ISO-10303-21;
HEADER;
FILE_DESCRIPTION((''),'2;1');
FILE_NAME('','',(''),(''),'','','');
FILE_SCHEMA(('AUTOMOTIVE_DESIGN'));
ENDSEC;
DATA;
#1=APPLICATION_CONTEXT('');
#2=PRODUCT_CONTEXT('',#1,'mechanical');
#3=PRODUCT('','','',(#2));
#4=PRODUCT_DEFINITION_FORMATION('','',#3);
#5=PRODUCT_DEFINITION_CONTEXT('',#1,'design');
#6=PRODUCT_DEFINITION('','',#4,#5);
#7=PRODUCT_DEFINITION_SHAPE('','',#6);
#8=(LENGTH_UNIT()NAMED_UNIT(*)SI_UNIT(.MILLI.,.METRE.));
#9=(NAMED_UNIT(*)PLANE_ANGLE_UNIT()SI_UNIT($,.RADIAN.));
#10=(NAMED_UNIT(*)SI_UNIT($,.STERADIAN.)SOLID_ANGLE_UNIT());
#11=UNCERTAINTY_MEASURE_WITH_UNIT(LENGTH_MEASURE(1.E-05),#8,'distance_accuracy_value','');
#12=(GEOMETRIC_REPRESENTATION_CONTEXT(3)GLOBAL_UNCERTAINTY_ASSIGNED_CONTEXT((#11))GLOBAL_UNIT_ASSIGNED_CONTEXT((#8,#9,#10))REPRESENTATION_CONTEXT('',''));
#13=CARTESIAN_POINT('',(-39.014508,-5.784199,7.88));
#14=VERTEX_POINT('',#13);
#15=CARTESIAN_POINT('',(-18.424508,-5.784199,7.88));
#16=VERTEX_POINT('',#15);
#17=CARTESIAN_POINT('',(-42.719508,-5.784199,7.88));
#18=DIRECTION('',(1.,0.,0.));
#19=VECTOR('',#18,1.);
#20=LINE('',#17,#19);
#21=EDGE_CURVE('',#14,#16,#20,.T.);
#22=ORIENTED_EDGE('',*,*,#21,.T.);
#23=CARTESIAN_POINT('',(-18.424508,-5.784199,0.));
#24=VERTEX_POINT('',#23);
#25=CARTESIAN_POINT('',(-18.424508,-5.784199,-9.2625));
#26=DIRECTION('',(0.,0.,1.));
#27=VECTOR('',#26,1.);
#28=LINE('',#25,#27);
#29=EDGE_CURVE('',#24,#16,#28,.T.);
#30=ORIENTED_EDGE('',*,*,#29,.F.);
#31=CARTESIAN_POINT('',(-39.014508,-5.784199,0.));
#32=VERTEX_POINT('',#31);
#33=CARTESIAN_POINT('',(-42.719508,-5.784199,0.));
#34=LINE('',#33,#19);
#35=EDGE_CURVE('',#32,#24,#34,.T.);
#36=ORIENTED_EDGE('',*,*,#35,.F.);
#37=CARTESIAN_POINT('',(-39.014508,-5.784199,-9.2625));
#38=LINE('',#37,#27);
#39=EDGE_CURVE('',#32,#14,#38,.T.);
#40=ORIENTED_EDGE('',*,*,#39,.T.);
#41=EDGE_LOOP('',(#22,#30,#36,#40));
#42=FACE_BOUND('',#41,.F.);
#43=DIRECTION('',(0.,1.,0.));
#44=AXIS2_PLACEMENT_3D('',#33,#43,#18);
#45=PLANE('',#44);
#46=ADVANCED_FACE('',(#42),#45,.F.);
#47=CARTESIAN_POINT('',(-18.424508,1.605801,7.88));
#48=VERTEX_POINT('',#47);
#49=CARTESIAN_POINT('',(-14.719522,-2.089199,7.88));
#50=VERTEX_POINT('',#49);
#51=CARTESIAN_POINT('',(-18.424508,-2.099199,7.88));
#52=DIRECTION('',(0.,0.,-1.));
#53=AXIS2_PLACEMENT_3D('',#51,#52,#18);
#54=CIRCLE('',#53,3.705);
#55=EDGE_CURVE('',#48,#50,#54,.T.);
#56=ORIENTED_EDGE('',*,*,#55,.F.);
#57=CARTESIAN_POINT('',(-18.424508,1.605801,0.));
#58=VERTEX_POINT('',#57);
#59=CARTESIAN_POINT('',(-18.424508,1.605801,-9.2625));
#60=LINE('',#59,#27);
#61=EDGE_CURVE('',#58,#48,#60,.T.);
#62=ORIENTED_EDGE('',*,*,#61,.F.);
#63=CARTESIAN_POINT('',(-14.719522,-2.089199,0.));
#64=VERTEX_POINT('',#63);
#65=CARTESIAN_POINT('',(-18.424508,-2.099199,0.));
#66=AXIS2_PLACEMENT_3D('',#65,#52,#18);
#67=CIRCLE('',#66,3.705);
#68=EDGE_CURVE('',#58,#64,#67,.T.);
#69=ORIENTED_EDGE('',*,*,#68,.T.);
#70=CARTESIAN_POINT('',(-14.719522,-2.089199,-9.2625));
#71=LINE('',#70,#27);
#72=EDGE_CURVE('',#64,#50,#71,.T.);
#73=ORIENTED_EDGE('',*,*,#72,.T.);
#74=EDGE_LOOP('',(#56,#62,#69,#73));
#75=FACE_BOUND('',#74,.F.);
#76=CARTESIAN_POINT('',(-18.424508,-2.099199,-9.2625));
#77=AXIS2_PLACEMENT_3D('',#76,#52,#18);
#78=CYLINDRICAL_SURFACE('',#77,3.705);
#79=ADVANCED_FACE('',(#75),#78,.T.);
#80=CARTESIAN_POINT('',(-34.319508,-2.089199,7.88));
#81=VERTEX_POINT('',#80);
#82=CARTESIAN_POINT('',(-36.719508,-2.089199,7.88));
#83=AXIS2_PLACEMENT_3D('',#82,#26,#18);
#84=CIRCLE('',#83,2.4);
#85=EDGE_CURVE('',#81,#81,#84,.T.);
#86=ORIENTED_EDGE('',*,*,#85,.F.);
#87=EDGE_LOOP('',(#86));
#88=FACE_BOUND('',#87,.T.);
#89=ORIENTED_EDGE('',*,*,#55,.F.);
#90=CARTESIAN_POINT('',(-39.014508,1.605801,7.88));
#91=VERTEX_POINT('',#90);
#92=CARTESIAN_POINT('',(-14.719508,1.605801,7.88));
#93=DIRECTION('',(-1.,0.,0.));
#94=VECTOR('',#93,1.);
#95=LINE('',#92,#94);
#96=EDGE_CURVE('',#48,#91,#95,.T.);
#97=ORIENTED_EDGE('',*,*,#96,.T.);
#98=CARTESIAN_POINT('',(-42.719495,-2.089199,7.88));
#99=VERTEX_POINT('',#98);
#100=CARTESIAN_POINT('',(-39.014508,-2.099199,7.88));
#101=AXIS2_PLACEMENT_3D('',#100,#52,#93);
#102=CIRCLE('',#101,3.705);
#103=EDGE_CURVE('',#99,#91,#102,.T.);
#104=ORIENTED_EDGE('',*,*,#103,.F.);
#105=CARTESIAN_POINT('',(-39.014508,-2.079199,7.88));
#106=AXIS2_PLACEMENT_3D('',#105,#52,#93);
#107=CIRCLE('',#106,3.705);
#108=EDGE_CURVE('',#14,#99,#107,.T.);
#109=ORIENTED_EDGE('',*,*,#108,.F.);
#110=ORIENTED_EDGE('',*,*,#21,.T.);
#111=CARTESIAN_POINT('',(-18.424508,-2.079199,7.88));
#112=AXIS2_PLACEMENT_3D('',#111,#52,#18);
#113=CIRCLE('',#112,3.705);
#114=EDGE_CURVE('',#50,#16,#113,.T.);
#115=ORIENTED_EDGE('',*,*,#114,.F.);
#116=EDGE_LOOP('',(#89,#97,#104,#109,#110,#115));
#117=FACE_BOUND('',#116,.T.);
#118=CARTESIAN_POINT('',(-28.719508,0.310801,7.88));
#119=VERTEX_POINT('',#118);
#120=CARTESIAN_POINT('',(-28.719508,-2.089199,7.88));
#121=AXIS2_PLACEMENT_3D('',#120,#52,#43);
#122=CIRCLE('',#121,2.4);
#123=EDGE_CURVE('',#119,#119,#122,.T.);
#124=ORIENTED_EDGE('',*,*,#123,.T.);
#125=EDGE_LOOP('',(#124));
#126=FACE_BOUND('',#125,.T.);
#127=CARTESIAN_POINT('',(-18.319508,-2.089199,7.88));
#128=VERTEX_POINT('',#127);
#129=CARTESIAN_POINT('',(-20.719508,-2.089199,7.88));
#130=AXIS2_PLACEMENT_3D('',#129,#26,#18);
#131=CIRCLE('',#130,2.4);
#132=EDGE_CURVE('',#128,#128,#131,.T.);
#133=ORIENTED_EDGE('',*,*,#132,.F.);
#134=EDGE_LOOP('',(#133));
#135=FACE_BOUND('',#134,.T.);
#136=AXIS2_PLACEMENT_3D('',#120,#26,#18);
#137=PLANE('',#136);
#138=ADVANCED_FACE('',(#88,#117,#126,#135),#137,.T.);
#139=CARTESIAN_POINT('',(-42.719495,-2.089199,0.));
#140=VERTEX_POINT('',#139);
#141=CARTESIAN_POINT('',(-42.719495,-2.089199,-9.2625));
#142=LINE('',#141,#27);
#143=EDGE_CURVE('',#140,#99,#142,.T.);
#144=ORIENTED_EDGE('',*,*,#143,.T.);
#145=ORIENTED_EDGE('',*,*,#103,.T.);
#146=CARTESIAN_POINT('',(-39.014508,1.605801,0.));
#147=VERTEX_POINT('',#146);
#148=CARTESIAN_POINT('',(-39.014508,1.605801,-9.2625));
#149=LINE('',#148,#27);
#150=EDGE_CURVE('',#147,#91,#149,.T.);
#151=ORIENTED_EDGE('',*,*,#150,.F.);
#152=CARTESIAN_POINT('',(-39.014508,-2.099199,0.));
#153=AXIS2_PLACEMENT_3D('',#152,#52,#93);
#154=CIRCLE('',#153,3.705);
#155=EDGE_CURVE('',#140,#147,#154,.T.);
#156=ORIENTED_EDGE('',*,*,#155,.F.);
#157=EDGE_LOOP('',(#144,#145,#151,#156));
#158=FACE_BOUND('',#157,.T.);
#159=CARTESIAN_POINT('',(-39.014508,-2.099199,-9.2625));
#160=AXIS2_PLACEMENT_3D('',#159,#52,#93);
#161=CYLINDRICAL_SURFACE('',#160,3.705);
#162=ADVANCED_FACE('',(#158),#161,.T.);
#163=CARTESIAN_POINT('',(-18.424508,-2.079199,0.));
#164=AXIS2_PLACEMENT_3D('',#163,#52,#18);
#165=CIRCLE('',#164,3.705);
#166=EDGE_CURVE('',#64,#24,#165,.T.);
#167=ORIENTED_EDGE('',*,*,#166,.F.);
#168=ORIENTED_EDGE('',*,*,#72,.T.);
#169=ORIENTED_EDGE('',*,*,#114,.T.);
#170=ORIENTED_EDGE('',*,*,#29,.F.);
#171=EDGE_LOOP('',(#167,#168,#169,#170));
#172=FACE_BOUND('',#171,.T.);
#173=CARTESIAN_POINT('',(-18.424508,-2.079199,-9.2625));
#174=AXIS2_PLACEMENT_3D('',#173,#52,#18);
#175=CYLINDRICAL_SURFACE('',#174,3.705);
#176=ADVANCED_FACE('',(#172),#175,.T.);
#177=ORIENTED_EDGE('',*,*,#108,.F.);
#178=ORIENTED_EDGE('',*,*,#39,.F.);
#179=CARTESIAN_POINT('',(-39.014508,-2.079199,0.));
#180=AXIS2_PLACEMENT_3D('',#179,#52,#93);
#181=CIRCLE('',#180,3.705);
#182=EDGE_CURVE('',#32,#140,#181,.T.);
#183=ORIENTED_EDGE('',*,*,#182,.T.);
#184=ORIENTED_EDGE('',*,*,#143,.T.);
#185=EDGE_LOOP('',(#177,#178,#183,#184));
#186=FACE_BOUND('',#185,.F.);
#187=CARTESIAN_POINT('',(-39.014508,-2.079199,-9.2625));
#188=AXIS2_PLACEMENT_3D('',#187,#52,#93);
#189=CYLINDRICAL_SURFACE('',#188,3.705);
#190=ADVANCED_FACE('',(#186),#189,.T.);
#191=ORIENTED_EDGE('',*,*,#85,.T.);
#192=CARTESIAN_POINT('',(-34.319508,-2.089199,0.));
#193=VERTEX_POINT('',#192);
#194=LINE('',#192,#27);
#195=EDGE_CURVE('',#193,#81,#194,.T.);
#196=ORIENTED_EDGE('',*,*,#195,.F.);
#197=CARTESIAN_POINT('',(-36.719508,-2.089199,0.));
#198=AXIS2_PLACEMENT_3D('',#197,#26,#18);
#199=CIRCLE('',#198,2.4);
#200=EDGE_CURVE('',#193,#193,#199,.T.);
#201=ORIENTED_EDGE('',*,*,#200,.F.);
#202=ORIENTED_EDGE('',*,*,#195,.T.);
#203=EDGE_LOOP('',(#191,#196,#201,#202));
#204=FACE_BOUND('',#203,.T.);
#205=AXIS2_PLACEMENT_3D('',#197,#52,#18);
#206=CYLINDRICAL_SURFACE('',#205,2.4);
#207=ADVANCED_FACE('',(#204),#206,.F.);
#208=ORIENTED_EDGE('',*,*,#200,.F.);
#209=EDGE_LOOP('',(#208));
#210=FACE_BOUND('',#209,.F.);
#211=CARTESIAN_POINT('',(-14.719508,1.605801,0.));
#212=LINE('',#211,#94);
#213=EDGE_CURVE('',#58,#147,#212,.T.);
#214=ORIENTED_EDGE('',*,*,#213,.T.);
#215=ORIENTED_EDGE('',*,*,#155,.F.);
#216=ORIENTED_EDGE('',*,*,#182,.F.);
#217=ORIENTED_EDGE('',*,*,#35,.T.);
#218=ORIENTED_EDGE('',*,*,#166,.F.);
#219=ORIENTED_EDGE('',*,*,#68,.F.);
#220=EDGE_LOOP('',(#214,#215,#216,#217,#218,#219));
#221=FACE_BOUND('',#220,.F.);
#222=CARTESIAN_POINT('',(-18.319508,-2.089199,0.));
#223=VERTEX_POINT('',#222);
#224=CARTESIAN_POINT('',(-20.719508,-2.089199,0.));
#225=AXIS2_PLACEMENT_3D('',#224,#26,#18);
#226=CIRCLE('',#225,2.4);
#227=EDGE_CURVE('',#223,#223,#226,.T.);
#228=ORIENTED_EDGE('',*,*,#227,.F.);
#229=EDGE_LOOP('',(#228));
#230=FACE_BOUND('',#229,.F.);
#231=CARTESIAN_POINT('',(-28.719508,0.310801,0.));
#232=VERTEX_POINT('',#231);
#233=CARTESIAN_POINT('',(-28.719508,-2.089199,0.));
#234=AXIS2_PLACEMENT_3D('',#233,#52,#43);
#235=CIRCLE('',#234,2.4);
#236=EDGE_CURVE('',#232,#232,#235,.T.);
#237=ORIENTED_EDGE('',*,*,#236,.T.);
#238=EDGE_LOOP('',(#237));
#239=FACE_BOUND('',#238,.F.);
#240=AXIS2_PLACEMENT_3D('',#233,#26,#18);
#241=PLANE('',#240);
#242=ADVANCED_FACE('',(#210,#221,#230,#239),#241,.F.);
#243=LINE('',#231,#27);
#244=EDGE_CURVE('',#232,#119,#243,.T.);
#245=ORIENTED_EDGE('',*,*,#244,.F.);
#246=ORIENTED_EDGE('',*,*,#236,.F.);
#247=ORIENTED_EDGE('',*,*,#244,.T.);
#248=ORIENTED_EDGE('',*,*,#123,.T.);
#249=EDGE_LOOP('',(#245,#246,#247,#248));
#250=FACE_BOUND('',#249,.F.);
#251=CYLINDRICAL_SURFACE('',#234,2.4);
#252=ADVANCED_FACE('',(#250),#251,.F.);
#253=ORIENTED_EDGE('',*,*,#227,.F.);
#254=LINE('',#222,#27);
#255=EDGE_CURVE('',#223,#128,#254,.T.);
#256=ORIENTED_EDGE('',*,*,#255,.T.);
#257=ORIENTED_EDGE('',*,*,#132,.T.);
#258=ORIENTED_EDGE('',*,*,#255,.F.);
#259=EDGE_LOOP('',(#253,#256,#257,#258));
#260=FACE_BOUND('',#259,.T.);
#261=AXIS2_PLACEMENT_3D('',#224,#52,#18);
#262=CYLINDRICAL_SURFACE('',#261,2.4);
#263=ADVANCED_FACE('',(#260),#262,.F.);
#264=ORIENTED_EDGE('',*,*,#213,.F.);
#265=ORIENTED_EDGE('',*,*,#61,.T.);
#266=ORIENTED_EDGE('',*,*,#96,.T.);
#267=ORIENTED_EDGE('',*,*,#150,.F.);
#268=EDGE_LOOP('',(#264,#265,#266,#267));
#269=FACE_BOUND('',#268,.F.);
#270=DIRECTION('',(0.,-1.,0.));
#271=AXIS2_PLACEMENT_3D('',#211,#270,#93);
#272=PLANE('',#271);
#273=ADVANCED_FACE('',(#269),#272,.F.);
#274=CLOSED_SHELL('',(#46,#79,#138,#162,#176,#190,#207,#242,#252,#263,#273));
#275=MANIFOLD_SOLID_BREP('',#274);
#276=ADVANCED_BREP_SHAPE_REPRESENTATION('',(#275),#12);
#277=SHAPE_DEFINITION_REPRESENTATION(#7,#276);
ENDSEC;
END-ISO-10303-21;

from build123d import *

# Parameters (mm, degrees)
F0_R        = 2.4
F1_DEPTH    = 7.88
F2_T1_DEPTH = 26.405


# Not quite as in the source:
# - a fillet or chamfer that OpenCascade refuses, or shapes differently, is made with other operations: its cross-section is extruded or revolved along the edge and cut away or added


with BuildPart() as f1:
    # F0 (on Top) → F1 (new body)
    with BuildSketch(Plane.XY):
        Polygon((-14.7195083171, 1.6058013724), (-28.7195083171, 1.6058013724), (-42.7195083171, 1.6058013724), (-42.7195083171, -2.0891986276), (-42.7195083171, -5.7841986276), (-28.7195083171, -5.7841986276), (-14.7195083171, -5.7841986276), (-14.7195083171, -2.0891986276), align=None)
        with Locations((-36.7195083171, -2.0891986276)):
            Circle(F0_R, mode=Mode.SUBTRACT)
        with BuildLine():
            ThreePointArc((-28.7195083171, -4.4891986276), (-31.1195083171, -2.0891986276), (-28.7195083171, 0.3108013724))
            ThreePointArc((-28.7195083171, 0.3108013724), (-26.3195083171, -2.0891986276), (-28.7195083171, -4.4891986276))
        make_face(mode=Mode.SUBTRACT)
        with Locations((-20.7195083171, -2.0891986276)):
            Circle(F0_R, mode=Mode.SUBTRACT)
    extrude(amount=F1_DEPTH)

    # F2: fillet of radius 3.705 on 4 edges, made by hand

    # F2_s2 → F2_t1 (cut)
    with BuildSketch(Plane.XY.offset(-9.2625)):
        with BuildLine():
            ThreePointArc((-14.7195083171, -2.0991986276), (-15.8046776928, 0.5206319967), (-18.4245083171, 1.6058013724))
            Line((-18.4245083171, 1.6058013724), (-14.7195083171, 1.6058013724))
            Line((-14.7195083171, 1.6058013724), (-14.7195083171, -2.0991986276))
        make_face()
        with BuildLine():
            ThreePointArc((-14.7195083171, -2.0791986276), (-15.8046776928, -4.6990292519), (-18.4245083171, -5.7841986276))
            Line((-18.4245083171, -5.7841986276), (-14.7195083171, -5.7841986276))
            Line((-14.7195083171, -5.7841986276), (-14.7195083171, -2.0791986276))
        make_face()
        with BuildLine():
            ThreePointArc((-42.7195083171, -2.0991986276), (-41.6343389413, 0.5206319967), (-39.0145083171, 1.6058013724))
            Line((-39.0145083171, 1.6058013724), (-42.7195083171, 1.6058013724))
            Line((-42.7195083171, 1.6058013724), (-42.7195083171, -2.0991986276))
        make_face()
        with BuildLine():
            ThreePointArc((-42.7195083171, -2.0791986276), (-41.6343389413, -4.6990292519), (-39.0145083171, -5.7841986276))
            Line((-39.0145083171, -5.7841986276), (-42.7195083171, -5.7841986276))
            Line((-42.7195083171, -5.7841986276), (-42.7195083171, -2.0791986276))
        make_face()
    extrude(amount=F2_T1_DEPTH, mode=Mode.SUBTRACT)


solid = f1.part
